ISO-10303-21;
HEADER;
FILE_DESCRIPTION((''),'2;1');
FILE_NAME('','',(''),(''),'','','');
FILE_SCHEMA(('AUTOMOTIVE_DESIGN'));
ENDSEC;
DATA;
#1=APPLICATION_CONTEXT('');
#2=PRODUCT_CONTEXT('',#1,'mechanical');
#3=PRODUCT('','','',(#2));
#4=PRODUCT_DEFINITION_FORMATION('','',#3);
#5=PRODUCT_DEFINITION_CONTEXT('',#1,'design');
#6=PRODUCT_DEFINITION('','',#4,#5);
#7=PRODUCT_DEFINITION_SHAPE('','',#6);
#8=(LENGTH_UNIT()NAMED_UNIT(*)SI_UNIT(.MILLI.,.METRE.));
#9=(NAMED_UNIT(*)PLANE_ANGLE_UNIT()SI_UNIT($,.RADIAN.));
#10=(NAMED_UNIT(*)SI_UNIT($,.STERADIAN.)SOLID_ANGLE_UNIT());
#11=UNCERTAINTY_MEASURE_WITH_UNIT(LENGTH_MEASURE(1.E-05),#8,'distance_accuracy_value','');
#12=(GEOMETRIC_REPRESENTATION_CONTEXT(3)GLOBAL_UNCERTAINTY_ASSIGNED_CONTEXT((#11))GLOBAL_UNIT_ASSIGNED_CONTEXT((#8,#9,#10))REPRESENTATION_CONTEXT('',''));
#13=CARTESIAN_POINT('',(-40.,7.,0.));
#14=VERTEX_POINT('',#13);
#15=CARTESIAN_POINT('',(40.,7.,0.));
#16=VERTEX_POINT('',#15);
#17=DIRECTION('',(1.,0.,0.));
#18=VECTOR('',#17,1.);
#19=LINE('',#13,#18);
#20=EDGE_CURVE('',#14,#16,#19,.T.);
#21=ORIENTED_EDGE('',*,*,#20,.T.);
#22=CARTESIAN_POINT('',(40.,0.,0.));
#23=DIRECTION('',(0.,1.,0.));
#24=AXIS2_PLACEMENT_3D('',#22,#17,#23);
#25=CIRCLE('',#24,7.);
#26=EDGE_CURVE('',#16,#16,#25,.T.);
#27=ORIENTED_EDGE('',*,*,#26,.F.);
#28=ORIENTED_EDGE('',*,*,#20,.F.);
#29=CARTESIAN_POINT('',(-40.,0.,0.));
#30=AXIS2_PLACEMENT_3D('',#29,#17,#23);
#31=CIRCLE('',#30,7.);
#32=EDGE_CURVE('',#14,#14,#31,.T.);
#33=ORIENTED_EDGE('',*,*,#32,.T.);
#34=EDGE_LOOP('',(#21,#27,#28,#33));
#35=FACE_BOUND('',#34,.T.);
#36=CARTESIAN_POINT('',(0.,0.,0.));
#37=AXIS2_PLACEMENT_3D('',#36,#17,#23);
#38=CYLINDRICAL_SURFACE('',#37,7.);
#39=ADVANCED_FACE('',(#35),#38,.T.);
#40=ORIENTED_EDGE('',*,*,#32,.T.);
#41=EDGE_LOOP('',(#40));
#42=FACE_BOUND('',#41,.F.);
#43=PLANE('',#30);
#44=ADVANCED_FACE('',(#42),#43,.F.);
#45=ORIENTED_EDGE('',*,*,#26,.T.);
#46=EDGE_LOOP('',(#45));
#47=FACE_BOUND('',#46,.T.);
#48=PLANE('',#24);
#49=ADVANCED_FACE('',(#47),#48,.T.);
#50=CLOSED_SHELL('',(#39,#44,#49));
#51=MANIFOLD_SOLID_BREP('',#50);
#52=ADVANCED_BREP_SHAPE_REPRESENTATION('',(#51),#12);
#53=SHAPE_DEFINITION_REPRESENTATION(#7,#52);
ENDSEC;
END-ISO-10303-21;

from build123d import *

# Parameters (mm, degrees)
F0_R     = 7
F1_DEPTH = 40


# Not quite as in the source:
# - the program builds the solid bodies; features that only make, move or delete a surface that nothing else refers to are left out


with BuildPart() as f1:
    # F0 (on Right) → F1 (new body, symmetric)
    with BuildSketch(Plane.YZ):
        Circle(F0_R)
    extrude(amount=F1_DEPTH, both=True)


solid = f1.part
